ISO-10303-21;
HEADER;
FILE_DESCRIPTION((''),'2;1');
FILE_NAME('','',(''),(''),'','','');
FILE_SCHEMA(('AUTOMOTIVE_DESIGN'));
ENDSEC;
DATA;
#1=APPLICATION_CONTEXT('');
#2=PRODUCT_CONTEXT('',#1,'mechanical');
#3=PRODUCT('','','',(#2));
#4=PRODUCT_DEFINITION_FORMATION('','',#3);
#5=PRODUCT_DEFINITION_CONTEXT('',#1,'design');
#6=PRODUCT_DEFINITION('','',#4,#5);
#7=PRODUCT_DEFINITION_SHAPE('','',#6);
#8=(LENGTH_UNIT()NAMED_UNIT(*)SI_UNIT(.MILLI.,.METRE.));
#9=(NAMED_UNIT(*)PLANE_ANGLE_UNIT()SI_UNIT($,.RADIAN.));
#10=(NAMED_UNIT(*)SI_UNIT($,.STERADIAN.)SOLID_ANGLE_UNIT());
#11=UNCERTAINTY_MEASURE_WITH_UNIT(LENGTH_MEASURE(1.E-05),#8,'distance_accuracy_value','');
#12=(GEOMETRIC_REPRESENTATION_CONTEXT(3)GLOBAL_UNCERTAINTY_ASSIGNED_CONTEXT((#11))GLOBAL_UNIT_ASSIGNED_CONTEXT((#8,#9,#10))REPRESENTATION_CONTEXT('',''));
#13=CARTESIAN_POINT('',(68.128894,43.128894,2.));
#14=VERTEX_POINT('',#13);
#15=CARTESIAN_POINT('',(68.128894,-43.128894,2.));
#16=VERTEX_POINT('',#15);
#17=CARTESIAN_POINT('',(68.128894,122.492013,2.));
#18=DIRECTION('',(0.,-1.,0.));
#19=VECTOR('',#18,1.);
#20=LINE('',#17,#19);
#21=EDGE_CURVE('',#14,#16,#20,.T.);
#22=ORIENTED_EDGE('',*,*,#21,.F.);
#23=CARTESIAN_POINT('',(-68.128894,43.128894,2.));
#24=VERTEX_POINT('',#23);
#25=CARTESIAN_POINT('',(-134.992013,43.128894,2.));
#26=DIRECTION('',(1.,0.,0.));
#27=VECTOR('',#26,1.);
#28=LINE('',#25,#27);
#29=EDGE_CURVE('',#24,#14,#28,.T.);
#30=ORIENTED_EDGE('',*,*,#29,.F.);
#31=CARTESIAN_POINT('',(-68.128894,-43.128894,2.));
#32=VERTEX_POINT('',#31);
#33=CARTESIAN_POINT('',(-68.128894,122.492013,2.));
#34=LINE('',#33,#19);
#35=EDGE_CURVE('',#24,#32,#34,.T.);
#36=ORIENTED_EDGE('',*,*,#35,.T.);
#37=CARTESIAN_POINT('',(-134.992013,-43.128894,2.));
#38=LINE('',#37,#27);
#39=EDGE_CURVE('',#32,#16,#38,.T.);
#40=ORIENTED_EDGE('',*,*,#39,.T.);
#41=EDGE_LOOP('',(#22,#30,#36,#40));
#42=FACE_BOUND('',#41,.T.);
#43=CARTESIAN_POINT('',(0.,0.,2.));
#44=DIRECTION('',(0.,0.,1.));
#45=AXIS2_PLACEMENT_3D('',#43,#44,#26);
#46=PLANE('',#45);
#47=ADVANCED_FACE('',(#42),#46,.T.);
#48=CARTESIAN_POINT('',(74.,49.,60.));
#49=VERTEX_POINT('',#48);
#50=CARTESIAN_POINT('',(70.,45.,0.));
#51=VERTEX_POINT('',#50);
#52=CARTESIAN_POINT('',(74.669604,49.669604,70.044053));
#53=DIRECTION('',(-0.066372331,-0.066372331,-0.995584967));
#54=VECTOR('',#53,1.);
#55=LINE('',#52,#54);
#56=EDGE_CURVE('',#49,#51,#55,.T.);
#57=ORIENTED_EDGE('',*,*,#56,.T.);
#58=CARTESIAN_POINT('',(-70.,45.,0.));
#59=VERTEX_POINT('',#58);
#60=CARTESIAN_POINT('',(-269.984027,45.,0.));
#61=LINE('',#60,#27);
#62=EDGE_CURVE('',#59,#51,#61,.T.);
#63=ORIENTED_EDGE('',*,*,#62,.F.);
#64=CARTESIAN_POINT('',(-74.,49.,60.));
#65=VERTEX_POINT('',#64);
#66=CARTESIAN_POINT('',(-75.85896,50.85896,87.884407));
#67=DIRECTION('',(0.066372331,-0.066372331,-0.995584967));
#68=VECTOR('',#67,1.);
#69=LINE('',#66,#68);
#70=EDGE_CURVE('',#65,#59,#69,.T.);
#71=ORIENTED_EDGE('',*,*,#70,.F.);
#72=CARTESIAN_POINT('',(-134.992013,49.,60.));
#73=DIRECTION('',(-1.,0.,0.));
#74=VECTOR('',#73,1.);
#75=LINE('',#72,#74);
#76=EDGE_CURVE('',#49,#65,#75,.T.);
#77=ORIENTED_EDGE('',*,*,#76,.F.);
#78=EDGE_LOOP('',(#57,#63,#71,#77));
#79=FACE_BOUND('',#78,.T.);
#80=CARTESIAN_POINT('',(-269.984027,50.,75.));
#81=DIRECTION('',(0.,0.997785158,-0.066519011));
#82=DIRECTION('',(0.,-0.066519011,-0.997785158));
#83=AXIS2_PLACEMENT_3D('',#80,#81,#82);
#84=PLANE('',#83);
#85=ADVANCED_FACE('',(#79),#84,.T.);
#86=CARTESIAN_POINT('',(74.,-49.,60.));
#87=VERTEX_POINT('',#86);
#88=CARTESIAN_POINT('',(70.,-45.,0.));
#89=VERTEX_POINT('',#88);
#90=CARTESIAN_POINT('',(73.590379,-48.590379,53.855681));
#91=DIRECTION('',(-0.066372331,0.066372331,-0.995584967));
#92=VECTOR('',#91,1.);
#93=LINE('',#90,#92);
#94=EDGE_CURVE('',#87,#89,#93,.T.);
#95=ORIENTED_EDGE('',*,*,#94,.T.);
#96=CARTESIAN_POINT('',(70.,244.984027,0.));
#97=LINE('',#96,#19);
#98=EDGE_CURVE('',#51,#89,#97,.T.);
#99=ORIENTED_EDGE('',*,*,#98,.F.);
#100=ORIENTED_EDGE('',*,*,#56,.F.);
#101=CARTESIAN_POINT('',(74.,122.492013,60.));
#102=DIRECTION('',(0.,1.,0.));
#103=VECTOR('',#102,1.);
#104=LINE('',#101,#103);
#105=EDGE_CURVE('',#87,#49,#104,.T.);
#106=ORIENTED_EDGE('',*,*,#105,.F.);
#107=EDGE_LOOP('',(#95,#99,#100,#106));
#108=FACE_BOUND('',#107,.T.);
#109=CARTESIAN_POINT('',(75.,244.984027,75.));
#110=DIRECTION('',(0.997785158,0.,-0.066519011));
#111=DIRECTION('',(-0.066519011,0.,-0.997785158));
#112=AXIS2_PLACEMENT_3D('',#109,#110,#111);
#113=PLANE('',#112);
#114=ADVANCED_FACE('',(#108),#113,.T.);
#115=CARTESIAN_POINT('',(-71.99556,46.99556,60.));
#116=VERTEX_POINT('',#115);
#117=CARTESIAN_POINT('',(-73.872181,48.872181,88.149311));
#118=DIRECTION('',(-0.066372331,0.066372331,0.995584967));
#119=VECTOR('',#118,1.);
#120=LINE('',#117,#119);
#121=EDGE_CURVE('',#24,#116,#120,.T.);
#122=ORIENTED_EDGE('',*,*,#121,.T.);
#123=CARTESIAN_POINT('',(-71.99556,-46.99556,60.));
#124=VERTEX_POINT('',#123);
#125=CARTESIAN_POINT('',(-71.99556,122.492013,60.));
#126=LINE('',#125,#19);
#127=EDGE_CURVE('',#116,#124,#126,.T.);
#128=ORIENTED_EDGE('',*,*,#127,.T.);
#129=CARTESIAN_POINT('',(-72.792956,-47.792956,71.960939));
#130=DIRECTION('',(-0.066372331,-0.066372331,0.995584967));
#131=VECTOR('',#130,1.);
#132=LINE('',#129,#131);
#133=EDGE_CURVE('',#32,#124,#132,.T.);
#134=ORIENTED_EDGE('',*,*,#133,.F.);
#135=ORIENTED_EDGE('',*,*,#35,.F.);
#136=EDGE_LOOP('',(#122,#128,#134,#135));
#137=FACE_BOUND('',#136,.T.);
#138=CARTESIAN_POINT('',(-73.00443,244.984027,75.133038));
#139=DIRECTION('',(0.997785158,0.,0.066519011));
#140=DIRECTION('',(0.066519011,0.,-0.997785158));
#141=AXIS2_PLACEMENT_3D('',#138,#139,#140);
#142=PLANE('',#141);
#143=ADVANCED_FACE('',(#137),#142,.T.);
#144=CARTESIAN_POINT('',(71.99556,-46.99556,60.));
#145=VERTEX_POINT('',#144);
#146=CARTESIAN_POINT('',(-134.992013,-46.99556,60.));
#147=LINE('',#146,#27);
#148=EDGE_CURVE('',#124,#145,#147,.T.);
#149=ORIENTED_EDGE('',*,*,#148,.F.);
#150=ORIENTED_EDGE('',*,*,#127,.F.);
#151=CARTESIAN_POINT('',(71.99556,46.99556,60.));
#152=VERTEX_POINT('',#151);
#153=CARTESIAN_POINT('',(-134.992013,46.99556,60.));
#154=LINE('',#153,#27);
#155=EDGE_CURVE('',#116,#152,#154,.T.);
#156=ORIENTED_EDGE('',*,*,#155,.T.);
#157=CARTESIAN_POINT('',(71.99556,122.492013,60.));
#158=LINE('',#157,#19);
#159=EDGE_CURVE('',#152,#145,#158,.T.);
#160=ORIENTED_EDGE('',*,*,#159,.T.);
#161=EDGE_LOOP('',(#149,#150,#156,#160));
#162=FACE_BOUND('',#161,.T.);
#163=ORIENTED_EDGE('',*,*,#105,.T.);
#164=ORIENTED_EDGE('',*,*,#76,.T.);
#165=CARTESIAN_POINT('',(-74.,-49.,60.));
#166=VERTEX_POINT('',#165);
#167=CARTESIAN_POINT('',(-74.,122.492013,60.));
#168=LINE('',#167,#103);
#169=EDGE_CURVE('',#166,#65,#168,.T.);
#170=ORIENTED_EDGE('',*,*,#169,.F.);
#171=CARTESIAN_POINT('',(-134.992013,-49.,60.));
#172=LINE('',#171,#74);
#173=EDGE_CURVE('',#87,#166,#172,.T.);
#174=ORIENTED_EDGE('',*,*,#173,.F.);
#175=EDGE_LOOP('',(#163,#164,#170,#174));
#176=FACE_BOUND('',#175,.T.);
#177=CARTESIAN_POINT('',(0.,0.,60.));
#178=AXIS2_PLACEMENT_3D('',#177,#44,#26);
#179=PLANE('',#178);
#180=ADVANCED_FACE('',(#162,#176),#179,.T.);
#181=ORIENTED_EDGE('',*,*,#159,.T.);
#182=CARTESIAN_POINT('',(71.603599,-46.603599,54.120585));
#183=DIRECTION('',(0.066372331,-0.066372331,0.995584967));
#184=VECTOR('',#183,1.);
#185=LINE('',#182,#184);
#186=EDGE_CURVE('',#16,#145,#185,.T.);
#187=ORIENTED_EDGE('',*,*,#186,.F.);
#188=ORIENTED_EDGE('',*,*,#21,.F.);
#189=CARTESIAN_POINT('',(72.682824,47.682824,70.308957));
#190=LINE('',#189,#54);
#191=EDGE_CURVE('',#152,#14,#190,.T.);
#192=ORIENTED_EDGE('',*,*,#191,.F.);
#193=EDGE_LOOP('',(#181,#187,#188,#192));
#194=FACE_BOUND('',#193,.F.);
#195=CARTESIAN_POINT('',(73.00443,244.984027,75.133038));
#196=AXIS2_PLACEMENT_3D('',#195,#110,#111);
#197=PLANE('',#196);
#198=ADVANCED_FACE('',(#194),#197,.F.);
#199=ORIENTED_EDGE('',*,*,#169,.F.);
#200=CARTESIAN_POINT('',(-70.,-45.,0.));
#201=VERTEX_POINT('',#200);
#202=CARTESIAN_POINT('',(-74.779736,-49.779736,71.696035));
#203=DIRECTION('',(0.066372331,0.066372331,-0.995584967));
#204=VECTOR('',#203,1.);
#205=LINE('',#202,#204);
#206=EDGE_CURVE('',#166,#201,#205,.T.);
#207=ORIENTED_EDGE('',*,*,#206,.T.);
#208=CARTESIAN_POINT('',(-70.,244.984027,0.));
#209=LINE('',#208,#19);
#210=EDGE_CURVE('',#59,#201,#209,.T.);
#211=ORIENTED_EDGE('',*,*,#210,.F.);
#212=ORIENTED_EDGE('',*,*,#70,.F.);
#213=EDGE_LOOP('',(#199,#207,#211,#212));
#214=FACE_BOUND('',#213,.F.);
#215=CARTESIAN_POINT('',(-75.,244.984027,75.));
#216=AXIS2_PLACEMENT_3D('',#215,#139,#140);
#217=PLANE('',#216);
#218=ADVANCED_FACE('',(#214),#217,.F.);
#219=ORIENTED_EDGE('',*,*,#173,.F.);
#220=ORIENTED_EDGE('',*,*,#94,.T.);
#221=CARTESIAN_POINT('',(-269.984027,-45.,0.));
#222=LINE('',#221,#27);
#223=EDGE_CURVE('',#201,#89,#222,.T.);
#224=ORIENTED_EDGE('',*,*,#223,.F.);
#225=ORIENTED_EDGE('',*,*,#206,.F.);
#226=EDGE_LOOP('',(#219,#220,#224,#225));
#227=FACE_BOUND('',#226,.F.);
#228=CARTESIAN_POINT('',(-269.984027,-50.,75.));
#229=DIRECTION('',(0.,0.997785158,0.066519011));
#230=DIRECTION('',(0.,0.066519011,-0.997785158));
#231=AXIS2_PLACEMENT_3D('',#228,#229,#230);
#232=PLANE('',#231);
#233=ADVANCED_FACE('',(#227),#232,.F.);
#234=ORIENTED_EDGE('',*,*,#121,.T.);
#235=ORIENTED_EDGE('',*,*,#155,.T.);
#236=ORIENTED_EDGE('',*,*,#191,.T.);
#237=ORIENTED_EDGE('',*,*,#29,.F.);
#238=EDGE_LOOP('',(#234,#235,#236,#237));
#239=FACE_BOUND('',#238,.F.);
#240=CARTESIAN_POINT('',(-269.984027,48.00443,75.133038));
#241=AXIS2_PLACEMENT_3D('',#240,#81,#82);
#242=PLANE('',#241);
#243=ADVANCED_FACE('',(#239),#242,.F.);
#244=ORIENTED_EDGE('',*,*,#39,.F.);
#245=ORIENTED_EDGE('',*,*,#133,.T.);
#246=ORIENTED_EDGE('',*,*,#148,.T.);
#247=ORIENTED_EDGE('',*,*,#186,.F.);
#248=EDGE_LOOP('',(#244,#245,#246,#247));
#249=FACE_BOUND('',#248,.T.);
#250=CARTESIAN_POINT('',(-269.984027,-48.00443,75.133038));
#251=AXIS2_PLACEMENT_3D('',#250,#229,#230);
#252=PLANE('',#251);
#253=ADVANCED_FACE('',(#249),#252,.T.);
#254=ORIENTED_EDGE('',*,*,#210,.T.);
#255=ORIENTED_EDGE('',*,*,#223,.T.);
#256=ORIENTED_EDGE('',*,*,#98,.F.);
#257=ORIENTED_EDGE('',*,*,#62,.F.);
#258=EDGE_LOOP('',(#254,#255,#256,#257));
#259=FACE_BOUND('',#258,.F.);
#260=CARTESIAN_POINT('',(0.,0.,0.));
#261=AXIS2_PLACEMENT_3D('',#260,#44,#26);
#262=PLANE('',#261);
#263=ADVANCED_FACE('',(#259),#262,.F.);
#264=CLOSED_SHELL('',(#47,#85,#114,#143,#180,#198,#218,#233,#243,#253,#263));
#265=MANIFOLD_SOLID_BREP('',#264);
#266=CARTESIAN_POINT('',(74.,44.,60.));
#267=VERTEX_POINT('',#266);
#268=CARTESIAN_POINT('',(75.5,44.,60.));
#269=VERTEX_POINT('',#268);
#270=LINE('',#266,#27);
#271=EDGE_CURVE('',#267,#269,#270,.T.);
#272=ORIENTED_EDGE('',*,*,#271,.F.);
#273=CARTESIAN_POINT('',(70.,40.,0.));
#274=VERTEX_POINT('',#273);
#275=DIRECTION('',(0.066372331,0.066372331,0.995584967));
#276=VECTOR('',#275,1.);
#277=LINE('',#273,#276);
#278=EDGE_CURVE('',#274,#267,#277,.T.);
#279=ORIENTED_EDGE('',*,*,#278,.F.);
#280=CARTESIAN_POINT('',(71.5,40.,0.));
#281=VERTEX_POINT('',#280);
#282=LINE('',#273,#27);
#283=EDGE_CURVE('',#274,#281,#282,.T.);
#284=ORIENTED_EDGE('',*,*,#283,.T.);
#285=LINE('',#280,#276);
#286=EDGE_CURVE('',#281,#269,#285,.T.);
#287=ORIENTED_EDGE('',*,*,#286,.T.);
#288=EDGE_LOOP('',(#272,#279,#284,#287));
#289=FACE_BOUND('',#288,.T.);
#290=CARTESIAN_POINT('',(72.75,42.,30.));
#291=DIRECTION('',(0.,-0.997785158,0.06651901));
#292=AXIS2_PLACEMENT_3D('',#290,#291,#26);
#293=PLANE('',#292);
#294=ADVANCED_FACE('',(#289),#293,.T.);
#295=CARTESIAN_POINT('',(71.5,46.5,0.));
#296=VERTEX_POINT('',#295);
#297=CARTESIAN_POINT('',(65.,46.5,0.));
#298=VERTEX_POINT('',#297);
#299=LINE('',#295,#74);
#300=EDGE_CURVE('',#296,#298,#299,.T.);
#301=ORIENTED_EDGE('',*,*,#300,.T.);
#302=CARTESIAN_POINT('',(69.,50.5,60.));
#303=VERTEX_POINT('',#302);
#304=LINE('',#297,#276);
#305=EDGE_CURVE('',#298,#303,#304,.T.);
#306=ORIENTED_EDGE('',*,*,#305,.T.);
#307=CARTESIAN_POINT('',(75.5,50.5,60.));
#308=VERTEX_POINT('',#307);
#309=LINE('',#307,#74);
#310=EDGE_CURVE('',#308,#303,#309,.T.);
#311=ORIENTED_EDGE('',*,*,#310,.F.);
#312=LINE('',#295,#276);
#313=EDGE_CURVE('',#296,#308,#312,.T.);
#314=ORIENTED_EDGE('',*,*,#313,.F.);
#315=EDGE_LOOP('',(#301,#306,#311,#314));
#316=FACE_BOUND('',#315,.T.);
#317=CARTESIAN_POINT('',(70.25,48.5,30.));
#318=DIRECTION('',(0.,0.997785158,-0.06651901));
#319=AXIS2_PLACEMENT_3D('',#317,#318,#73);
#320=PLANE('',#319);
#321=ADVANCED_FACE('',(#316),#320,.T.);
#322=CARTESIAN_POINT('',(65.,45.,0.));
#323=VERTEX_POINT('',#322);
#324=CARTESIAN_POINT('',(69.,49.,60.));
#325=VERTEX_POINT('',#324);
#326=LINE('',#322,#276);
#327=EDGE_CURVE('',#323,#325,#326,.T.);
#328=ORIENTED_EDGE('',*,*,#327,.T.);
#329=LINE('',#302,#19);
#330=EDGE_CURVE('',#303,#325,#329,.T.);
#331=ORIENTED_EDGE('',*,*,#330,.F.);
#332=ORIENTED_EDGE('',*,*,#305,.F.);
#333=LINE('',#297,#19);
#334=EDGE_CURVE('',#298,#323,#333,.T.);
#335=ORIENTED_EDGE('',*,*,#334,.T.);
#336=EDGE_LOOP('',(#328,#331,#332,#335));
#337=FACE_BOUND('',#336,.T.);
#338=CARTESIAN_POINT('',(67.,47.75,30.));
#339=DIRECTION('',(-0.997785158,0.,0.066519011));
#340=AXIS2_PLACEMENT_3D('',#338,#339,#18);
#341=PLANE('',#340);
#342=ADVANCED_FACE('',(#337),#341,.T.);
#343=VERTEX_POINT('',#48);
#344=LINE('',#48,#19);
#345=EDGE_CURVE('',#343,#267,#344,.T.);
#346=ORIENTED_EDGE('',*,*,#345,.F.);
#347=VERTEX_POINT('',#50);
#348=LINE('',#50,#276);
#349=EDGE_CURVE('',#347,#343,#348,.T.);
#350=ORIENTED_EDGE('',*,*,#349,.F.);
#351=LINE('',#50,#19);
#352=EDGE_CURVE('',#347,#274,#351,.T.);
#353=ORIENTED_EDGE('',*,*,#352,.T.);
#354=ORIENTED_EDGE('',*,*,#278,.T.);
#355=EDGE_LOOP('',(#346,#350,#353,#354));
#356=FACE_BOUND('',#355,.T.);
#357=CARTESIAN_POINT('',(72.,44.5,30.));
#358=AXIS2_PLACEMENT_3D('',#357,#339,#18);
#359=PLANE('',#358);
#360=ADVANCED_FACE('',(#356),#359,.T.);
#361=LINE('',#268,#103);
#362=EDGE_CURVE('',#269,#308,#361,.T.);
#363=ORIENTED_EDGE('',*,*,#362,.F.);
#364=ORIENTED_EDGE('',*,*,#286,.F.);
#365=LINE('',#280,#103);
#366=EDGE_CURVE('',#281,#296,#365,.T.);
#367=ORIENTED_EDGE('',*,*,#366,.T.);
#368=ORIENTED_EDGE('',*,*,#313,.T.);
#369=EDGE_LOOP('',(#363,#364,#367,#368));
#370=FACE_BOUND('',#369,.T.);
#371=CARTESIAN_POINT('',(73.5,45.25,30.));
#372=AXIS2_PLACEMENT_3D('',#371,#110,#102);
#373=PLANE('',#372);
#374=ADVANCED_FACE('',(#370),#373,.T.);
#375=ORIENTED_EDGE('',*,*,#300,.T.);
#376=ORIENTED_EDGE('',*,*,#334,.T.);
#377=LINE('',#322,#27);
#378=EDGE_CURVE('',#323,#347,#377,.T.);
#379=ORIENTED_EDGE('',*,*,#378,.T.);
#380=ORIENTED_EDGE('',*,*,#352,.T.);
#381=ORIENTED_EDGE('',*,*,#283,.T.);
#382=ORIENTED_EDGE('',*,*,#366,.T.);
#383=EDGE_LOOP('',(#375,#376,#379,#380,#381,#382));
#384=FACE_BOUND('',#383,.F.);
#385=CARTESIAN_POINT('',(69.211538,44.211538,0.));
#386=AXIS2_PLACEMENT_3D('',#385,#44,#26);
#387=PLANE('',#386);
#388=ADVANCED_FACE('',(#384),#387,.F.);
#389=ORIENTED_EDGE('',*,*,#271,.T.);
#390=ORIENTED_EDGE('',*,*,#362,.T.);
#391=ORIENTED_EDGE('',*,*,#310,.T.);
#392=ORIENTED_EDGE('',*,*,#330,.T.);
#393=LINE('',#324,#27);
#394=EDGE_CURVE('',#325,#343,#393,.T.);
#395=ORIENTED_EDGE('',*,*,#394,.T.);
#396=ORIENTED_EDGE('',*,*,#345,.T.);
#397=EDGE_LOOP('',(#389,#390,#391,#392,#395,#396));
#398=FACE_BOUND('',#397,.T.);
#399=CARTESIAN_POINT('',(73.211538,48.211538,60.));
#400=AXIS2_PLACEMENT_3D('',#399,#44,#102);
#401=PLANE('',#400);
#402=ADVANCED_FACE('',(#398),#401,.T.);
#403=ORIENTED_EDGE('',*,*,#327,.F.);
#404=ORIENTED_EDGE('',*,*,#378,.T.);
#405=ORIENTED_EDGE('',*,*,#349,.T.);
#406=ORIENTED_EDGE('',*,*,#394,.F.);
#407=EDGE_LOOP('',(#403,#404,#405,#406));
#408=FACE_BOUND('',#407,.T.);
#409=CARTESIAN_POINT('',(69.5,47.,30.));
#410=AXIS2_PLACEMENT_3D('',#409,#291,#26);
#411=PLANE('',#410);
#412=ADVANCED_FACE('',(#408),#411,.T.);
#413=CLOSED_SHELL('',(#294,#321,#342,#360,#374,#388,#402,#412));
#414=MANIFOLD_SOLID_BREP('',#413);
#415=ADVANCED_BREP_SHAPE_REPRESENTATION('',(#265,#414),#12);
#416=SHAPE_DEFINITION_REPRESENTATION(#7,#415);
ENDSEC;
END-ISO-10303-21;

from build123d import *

# Parameters (mm, degrees)
F0_W        = 150
F0_H        = 100
F1_DEPTH    = 60
F2_T1_DEPTH = 539.968053853
F2_T3_DEPTH = 489.968053853
F3_T        = -2


# Not quite as in the source:
# - a fillet or chamfer that OpenCascade refuses, or shapes differently, is made with other operations: its cross-section is extruded or revolved along the edge and cut away or added


with BuildPart() as f1:
    # F0 (on Top) → F1 (new body)
    with BuildSketch(Plane.XY):
        Rectangle(F0_W, F0_H)
    extrude(amount=F1_DEPTH)

    # F2: chamfer of 5 x 75 on 4 edges, made by hand

    # F2_s2 → F2_t1 (cut)
    with BuildSketch(Plane.YZ.offset(-269.9840269265)):
        Polygon((-50, 75), (-45, 0), (-50, 0), align=None)
        Polygon((50, 75), (45, 0), (50, 0), align=None)
    extrude(amount=F2_T1_DEPTH, mode=Mode.SUBTRACT)

    # F2_s4 → F2_t3 (cut)
    with BuildSketch(Plane.XZ.offset(-244.9840269265)):
        Polygon((75, 75), (70, 0), (75, 0), align=None)
        Polygon((-75, 75), (-70, 0), (-75, 0), align=None)
    extrude(amount=F2_T3_DEPTH, mode=Mode.SUBTRACT)

    # F3
    f3_openings = [f1.faces().sort_by_distance(p)[0] for p in [
        (0, 0, 60),
    ]]
    offset(amount=F3_T, openings=f3_openings)


with BuildPart() as f5:
    # F5: sweep along a path in F5_path
    with BuildLine(Plane(origin=(70, 45, 0), x_dir=(0, -0.0665190105, -0.9977851579), z_dir=(0, 0.9977851579, -0.0665190105))) as f5_path:
        Line((0, 0), (-60.1331855135, -4))
    # F4 (on face) → F5 (sweep)
    with BuildSketch(Plane.XY.offset(60)):
        Polygon((69, 49), (74, 49), (74, 44), (75.5, 44), (75.5, 50.5), (69, 50.5), align=None)
    sweep(path=f5_path.line)


solid = Compound([f1.part, f5.part])
